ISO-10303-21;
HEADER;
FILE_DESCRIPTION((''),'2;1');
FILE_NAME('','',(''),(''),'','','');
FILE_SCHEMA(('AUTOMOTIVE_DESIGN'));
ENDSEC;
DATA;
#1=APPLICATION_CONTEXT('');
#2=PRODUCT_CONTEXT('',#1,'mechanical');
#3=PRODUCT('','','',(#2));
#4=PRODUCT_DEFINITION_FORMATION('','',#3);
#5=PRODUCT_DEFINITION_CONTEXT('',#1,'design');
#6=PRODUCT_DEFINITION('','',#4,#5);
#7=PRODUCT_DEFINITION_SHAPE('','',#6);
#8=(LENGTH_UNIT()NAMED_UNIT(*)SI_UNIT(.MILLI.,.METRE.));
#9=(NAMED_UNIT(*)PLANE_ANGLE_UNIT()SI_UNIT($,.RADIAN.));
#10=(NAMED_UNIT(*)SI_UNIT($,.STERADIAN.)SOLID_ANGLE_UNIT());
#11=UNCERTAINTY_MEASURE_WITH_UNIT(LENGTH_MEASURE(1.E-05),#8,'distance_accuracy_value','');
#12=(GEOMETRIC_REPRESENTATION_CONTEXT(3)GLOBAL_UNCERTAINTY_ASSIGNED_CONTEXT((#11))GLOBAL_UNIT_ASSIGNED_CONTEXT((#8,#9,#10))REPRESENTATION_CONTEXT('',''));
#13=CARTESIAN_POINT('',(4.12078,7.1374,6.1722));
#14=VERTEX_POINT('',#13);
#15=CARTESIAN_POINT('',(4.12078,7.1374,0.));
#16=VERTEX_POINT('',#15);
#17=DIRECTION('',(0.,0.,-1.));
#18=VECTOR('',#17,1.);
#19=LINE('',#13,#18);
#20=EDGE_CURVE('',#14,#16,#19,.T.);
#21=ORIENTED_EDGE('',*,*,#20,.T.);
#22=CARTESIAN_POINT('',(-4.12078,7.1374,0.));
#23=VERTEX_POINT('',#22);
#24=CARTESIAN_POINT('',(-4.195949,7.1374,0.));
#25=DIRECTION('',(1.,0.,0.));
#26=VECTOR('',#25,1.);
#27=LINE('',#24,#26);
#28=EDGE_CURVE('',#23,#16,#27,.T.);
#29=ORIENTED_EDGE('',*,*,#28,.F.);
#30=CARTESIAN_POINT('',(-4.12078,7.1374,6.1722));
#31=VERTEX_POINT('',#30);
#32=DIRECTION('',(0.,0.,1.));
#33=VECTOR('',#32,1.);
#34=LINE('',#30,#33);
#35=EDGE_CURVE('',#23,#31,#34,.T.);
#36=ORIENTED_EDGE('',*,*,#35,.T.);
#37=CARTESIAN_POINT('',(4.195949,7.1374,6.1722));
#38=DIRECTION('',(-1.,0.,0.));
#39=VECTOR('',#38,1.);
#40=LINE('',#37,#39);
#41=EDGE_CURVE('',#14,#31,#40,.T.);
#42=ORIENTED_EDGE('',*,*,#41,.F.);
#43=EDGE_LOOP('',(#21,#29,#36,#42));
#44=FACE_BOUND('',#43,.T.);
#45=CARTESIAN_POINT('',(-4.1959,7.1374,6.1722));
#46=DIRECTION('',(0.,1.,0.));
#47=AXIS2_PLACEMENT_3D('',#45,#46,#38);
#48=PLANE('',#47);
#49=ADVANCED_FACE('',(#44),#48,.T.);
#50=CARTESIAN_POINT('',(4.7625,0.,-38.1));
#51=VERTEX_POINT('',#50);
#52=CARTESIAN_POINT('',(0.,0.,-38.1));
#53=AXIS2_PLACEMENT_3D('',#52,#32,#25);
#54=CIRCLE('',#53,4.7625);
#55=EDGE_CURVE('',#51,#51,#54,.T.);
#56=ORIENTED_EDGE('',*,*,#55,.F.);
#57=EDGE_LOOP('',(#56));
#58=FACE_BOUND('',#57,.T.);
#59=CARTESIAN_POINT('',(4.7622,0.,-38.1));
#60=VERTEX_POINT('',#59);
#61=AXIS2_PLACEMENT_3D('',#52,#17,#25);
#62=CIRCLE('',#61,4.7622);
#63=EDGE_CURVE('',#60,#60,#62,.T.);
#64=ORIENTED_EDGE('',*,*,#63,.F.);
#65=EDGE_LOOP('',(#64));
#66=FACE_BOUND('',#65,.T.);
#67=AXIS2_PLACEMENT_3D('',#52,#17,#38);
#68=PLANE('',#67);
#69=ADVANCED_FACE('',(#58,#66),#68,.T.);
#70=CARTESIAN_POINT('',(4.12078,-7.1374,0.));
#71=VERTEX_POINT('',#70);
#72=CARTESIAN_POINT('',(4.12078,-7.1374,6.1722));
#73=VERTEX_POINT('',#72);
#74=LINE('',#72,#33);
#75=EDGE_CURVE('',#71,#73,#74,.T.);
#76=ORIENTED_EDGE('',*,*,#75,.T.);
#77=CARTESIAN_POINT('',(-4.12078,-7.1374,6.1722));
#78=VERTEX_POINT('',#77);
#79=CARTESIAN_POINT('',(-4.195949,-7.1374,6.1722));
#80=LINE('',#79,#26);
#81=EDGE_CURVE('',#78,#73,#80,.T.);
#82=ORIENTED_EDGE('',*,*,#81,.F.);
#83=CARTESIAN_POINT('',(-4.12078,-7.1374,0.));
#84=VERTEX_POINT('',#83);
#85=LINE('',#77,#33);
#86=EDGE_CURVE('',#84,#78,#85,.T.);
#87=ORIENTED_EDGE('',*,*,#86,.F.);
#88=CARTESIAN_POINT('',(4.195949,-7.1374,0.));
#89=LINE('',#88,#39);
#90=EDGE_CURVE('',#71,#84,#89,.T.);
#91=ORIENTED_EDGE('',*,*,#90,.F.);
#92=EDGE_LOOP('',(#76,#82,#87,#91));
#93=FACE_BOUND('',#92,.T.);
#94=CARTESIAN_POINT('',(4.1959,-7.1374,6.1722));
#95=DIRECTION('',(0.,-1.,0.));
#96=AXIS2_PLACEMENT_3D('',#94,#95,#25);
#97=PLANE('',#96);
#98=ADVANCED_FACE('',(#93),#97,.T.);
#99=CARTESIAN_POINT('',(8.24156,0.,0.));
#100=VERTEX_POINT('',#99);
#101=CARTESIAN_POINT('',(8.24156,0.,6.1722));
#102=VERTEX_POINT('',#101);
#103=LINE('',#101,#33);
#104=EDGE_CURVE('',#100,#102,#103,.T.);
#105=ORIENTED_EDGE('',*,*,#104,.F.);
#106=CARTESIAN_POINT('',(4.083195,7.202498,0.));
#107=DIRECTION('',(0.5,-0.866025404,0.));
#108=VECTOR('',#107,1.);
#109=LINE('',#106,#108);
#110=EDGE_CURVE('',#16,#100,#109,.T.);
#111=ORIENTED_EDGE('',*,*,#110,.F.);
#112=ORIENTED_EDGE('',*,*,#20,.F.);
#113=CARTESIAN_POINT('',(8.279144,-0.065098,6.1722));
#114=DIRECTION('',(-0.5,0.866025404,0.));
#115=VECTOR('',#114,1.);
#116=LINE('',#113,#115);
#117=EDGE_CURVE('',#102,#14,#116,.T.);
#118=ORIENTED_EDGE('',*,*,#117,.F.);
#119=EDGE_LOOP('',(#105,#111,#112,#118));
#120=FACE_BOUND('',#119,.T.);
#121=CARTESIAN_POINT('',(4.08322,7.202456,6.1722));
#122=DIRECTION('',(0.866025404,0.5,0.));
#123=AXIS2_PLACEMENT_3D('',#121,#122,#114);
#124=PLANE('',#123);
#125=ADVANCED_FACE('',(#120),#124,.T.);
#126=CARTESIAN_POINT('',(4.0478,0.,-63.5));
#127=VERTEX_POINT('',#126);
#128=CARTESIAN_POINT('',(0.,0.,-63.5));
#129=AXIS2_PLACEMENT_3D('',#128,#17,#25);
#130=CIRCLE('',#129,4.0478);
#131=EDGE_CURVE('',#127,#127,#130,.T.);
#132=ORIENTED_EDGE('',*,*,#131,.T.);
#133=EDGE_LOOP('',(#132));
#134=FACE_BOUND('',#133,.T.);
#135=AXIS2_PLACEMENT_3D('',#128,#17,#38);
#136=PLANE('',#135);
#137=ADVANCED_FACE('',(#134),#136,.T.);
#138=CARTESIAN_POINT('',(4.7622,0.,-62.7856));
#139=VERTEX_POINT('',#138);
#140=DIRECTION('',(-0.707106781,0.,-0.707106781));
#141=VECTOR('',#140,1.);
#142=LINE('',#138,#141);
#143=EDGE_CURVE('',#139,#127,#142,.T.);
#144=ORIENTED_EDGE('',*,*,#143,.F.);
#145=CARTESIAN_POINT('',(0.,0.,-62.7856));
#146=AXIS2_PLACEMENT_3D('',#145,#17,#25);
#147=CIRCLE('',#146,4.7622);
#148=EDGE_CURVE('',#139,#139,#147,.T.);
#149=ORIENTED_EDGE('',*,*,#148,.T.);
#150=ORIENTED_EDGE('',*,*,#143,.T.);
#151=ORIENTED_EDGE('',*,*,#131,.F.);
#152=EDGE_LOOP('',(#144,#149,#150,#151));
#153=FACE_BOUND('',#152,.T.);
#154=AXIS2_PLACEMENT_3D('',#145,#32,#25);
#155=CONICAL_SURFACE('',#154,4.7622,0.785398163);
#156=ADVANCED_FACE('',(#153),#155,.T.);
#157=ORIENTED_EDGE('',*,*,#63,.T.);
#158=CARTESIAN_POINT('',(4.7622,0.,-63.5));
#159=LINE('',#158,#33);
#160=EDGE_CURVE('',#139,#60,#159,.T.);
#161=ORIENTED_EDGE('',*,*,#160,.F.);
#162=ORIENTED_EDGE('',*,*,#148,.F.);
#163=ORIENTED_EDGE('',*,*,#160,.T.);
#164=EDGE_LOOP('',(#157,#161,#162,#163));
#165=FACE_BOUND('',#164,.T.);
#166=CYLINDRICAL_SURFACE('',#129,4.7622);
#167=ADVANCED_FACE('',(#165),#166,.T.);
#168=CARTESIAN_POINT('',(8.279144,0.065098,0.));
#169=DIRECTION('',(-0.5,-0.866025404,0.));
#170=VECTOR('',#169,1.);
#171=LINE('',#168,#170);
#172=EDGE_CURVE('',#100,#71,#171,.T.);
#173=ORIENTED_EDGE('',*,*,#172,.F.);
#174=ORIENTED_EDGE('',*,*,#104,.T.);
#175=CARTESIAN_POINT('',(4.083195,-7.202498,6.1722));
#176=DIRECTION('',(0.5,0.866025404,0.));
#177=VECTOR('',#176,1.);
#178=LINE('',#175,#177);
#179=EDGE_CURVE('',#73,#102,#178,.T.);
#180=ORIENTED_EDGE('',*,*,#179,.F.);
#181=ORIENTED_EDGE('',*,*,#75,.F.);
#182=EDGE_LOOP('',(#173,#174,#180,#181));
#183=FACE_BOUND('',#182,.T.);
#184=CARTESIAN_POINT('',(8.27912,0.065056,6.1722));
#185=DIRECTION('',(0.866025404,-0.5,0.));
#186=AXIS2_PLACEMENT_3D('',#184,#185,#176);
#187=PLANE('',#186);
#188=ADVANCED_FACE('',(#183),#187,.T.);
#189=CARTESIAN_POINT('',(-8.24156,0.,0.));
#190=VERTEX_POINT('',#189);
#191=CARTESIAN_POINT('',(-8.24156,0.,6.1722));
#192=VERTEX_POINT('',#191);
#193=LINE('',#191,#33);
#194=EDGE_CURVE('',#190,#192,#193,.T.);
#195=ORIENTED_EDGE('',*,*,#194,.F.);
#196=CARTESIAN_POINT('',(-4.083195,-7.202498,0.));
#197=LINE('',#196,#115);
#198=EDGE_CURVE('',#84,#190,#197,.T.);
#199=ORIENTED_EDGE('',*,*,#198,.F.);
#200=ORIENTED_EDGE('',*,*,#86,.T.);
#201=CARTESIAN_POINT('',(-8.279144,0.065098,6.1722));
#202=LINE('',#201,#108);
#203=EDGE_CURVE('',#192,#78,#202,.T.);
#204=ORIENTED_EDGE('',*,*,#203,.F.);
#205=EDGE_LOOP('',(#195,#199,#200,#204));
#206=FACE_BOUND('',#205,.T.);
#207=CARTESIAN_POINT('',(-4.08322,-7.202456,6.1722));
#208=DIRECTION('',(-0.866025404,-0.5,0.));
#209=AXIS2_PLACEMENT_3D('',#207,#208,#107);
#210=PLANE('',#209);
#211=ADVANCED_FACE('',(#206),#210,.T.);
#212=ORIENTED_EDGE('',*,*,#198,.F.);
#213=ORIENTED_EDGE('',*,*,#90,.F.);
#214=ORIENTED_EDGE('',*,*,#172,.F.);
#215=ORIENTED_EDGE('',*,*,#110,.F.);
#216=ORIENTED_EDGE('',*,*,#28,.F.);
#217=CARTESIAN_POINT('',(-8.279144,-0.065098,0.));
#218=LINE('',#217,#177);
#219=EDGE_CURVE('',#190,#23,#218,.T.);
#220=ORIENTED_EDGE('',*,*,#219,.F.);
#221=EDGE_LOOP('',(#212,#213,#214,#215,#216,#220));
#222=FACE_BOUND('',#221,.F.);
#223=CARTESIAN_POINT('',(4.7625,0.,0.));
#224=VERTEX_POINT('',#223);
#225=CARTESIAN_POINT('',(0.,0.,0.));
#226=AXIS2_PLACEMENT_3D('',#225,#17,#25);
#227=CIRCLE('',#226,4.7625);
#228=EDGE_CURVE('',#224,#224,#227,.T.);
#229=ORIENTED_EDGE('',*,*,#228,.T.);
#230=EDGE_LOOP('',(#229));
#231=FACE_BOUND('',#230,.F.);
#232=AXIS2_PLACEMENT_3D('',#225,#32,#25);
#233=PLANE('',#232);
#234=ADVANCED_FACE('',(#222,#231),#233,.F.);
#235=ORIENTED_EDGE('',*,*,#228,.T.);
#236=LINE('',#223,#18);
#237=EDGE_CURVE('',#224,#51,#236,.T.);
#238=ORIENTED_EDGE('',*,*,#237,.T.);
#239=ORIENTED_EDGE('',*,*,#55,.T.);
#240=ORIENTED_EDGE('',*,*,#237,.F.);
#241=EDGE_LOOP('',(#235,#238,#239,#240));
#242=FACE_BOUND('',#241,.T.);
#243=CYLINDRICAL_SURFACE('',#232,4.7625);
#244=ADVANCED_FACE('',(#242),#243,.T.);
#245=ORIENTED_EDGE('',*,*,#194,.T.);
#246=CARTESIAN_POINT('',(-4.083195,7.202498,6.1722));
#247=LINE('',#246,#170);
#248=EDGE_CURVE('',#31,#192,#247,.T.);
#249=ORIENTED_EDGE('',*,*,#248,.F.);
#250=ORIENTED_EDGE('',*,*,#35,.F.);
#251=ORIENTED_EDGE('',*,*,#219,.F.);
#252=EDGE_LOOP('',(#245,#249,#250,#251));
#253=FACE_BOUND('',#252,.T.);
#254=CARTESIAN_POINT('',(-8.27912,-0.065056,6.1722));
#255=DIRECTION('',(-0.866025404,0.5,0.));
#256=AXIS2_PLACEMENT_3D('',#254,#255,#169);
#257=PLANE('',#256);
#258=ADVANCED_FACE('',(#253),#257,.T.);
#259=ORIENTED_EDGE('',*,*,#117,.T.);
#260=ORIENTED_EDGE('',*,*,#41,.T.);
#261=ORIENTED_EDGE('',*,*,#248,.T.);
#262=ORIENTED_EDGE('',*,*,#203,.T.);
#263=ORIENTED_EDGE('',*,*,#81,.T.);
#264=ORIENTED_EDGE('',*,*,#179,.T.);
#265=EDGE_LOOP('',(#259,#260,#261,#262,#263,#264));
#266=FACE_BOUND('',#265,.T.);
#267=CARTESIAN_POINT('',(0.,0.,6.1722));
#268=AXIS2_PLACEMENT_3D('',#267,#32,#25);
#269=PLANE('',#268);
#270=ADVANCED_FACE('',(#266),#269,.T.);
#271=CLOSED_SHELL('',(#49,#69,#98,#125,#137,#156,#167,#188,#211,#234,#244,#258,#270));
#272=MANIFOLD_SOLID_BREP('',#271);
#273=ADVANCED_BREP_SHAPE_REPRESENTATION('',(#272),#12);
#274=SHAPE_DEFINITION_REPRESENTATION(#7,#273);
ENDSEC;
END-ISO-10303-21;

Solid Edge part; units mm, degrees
sketch "Sketch1" plane through (0, 0, 0) normal (0, 0, 1) x (1, 0, 0)
  circle A0 centre (0, 0) radius 8.2794
  dimension "D1" = 16.5588
extrude "Protrusion1" add sketch "Sketch1" along normal blind 6.1722
sketch "Sketch2" plane through (0, 0, 0) normal (0, 0, -1) x (1, 0, 0)
  circle A0 centre (0, 0) radius 4.7625
extrude "Protrusion2" add sketch "Sketch2" along normal blind 63.5
sketch "Sketch3" plane through (0, 0, -63.5) normal (0, 0, -1) x (1, 0, 0)
  circle A0 centre (0, 0) radius 4.7622
extrude "Cutout1" cut sketch "Sketch3" against normal blind 25.4 flip side to cut
chamfer "Chamfer_1" distance 0.7144 angle 45 1 edges at (-4.7622, 0, -63.5)
sketch "Sketch4" plane through (0, 0, 6.1722) normal (0, 0, 1) x (1, 0, 0)
  line L0 (-4.1959, 7.1374) -> (4.1959, 7.1374)
  dimension "D1" = 14.2748
extrude "Cutout2" cut sketch "Sketch4" against normal up to next material side at (0, 7.1874, 6.1722)
pattern_circular "Pattern1" count 6 over 360 about axis through (0, 0, 6.1722) along (0, 0, 1) of "Cutout2"
properties part number "201548"
